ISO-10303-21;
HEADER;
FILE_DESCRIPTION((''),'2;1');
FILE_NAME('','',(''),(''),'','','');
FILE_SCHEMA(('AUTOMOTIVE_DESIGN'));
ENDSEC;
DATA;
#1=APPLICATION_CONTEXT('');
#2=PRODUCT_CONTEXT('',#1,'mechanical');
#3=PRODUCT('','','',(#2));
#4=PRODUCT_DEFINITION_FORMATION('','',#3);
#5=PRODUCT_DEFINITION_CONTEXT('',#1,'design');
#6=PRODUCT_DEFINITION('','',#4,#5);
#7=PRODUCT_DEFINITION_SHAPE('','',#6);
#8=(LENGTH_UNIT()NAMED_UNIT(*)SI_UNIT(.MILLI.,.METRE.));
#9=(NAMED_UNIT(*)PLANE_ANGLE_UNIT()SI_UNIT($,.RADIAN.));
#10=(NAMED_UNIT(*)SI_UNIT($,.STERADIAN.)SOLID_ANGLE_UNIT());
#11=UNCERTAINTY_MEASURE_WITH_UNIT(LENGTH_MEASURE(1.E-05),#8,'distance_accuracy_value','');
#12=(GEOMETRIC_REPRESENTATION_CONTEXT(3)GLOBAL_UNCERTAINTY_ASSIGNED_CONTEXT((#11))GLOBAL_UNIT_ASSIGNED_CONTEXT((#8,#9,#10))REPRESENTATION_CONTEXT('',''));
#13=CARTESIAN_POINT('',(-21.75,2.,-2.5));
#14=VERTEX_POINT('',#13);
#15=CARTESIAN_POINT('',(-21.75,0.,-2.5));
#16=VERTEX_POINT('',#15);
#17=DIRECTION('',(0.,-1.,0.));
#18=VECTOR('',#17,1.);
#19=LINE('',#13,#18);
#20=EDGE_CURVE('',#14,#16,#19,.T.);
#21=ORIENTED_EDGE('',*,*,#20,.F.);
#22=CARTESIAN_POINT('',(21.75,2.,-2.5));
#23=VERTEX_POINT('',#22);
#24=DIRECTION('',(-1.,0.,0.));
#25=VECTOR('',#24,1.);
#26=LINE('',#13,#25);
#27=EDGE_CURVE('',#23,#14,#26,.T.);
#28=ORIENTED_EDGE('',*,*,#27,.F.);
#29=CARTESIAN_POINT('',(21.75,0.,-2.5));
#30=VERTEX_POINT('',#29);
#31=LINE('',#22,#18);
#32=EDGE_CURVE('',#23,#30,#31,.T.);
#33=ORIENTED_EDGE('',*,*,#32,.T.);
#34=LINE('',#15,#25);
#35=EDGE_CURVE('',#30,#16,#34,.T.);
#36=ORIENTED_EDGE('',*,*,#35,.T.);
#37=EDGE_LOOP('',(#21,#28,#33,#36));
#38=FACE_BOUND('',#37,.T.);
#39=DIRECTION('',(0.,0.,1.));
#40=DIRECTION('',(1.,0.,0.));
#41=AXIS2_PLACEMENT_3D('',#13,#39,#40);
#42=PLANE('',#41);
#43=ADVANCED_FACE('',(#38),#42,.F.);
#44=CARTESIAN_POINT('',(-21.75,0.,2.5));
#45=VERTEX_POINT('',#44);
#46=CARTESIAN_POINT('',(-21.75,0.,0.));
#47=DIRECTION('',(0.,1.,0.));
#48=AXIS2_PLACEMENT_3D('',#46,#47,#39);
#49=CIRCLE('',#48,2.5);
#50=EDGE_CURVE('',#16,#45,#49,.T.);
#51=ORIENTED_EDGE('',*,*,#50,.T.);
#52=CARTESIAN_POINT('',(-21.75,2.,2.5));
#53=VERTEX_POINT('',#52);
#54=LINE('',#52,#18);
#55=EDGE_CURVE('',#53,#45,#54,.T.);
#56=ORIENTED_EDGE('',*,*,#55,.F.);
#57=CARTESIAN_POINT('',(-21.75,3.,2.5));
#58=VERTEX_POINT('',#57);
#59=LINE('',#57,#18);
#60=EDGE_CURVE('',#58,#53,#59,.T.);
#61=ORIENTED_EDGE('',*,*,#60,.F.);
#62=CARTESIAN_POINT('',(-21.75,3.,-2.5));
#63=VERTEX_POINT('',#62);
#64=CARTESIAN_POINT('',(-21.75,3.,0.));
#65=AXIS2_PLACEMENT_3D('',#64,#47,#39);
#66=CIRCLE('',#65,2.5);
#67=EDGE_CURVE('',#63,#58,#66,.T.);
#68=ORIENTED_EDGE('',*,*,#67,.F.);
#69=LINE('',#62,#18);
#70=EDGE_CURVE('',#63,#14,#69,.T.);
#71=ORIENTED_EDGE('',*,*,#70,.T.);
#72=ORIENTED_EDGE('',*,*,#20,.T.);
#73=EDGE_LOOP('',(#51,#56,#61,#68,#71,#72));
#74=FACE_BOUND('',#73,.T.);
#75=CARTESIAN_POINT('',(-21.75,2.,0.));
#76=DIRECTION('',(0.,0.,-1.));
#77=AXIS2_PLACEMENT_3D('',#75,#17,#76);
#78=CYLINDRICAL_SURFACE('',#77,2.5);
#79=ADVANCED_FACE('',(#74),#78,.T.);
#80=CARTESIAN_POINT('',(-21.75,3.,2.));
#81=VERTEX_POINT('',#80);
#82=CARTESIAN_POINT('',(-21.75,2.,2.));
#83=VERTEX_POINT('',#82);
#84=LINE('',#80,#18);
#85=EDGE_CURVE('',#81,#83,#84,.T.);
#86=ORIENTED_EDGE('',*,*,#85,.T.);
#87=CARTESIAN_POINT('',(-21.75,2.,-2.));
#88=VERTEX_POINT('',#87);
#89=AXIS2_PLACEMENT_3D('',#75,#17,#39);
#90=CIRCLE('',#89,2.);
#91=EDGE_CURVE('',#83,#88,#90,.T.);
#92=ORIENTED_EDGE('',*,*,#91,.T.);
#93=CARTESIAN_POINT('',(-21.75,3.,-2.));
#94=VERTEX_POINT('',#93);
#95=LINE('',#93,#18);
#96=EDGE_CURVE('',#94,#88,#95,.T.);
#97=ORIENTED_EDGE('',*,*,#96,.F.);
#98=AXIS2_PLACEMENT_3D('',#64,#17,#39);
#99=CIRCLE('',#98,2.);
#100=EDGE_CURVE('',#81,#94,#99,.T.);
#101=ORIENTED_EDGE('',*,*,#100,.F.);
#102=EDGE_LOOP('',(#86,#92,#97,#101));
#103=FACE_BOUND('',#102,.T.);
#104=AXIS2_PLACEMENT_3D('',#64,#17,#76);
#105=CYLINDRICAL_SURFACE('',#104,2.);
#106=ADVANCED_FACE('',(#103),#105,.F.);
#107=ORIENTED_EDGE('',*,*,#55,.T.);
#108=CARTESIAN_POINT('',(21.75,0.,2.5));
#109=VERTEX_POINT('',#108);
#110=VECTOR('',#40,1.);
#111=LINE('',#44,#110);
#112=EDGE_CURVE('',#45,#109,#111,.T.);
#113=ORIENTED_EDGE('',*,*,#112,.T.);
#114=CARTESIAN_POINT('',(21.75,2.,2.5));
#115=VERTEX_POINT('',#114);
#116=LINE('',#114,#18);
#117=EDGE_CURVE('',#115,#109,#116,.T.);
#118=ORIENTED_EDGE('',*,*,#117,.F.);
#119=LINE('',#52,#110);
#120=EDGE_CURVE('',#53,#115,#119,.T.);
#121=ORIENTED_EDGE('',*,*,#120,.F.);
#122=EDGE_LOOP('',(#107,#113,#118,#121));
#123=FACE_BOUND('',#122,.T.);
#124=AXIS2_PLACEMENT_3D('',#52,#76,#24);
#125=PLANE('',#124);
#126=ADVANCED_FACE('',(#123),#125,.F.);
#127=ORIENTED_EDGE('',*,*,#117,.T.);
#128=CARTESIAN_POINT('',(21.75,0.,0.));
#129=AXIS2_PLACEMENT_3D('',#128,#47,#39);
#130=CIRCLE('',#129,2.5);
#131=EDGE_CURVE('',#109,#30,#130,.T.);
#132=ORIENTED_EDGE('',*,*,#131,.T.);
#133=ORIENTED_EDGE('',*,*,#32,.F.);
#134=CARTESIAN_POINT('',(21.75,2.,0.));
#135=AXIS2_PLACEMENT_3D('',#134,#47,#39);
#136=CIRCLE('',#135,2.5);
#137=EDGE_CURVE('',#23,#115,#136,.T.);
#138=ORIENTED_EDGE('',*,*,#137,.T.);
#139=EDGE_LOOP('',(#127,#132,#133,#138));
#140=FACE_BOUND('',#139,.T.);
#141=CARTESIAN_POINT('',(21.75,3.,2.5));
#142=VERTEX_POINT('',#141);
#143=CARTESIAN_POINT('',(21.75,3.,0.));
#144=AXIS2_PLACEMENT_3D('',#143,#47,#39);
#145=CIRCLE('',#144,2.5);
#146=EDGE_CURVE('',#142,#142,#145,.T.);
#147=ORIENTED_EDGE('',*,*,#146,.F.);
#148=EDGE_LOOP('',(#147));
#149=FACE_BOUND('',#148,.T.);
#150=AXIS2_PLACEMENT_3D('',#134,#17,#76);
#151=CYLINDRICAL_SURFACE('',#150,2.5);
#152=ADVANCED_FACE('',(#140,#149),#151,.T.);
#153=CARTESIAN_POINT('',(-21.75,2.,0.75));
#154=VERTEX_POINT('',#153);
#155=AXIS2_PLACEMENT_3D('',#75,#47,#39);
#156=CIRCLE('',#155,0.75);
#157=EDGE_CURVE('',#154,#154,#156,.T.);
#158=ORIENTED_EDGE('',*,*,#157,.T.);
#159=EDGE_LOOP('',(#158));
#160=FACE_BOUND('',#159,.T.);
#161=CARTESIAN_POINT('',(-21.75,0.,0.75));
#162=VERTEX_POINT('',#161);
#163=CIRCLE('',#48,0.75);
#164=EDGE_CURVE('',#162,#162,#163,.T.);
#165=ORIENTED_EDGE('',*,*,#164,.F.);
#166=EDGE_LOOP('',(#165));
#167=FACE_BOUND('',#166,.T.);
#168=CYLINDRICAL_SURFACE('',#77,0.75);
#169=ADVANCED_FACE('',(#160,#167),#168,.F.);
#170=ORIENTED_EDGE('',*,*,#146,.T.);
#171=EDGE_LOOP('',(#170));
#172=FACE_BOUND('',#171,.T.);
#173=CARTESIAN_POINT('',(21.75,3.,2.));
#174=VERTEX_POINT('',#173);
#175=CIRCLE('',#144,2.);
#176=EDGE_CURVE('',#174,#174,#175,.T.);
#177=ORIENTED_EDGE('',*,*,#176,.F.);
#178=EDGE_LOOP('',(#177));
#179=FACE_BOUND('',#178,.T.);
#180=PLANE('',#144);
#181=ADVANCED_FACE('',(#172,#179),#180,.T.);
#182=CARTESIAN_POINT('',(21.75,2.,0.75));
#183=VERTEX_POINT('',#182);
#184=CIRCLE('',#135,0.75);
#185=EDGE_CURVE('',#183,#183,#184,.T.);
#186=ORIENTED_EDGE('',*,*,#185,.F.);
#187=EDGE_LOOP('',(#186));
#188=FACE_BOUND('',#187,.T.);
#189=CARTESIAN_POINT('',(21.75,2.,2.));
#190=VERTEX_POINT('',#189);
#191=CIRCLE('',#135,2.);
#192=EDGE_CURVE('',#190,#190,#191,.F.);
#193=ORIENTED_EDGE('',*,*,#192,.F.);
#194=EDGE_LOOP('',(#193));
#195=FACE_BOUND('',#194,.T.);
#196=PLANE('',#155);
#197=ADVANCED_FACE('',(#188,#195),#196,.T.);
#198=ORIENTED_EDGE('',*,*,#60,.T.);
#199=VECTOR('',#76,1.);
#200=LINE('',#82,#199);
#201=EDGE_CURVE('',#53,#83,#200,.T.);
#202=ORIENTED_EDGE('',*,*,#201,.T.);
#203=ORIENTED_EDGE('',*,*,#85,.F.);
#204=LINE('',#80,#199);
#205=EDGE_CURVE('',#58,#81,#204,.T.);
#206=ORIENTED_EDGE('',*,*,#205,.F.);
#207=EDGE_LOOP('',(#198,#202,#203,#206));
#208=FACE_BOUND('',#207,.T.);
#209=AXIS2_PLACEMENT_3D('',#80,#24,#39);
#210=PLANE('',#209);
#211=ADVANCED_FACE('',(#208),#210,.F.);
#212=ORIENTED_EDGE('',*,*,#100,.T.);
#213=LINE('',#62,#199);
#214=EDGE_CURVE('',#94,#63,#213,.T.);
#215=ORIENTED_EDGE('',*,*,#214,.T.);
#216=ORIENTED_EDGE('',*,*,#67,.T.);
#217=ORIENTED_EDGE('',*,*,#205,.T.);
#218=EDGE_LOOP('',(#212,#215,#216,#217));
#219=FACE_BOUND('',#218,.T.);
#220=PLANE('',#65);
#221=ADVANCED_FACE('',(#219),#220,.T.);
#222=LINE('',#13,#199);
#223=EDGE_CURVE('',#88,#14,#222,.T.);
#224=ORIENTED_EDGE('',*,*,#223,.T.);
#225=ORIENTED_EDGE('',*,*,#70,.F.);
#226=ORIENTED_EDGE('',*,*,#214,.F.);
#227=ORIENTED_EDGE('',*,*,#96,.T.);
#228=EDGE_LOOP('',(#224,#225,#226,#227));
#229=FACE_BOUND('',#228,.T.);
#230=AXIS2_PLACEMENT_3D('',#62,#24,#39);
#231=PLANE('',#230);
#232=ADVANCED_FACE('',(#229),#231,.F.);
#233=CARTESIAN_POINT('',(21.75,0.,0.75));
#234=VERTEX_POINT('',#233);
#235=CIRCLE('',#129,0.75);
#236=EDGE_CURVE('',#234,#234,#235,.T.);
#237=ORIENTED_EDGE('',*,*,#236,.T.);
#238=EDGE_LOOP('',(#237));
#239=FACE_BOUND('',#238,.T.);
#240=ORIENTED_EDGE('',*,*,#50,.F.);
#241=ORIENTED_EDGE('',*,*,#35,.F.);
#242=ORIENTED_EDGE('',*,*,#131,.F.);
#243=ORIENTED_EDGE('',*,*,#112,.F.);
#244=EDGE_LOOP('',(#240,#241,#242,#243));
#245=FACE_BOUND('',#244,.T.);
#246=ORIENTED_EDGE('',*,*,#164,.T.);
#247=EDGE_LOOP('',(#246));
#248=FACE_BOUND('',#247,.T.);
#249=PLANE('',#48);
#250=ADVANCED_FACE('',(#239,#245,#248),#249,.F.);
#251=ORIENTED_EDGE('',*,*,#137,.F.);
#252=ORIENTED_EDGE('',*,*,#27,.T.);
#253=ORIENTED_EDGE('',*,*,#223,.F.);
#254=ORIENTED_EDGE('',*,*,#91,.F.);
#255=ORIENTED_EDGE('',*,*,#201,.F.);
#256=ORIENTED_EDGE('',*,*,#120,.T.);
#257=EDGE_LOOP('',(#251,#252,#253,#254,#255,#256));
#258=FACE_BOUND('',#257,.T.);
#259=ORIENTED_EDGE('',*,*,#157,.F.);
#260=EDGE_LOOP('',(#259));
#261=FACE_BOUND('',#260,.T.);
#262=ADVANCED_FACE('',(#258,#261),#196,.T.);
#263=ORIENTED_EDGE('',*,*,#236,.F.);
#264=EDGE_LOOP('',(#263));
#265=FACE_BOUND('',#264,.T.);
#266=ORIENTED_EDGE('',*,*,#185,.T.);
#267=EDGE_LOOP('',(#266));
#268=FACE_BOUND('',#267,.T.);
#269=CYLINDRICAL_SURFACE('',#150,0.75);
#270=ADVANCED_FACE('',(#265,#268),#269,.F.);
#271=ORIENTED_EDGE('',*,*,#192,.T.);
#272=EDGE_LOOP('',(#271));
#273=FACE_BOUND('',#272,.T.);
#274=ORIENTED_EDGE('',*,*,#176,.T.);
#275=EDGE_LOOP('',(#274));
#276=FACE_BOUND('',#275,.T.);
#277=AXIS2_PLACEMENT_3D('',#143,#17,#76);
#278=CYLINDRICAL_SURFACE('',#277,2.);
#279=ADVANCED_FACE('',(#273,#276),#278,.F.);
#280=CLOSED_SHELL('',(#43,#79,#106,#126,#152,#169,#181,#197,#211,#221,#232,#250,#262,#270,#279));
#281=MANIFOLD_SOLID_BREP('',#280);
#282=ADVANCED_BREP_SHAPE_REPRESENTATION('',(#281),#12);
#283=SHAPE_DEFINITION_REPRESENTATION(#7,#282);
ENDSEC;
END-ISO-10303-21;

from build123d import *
from build123d.topology import SkipClean

# Parameters (mm, degrees)
SKETCH2_R           = 0.75
BOSS_EXTRUDE1_DEPTH = 2
SKETCH3_R           = 2.5
SKETCH3_R_2         = 2
BOSS_EXTRUDE2_DEPTH = 1


with BuildPart() as part:
    # Sketch2 → Boss-Extrude1 (new body)
    with BuildSketch(Plane(origin=(0, 0, 0), x_dir=(1, 0, 0), z_dir=(0, 1, 0))):
        with BuildLine():
            Line((-21.75, 2.5), (21.75, 2.5))
            ThreePointArc((21.75, 2.5), (24.25, 0), (21.75, -2.5))
            Line((21.75, -2.5), (-21.75, -2.5))
            ThreePointArc((-21.75, -2.5), (-24.25, 0), (-21.75, 2.5))
        make_face()
        with Locations((-21.75, 0)):
            Circle(SKETCH2_R, mode=Mode.SUBTRACT)
        with Locations((21.75, 0)):
            Circle(SKETCH2_R, mode=Mode.SUBTRACT)
    extrude(amount=BOSS_EXTRUDE1_DEPTH)

    # Sketch3 → Boss-Extrude2 (add)
    # profile 1 of 2: a face of its own
    with SkipClean():  # the faces are left unmerged after this step: merging them gives an invalid solid
        with BuildSketch(Plane(origin=(0, 2, 0), x_dir=(1, 0, 0), z_dir=(0, 1, 0))):
            with Locations((21.75, 0)):
                Circle(SKETCH3_R)
            with Locations((21.75, 0)):
                Circle(SKETCH3_R_2, mode=Mode.SUBTRACT)
        # profile 2 of 2: a face of its own
        with BuildSketch(Plane(origin=(0, 2, 0), x_dir=(1, 0, 0), z_dir=(0, 1, 0))):
            with BuildLine():
                Line((-21.75, 2.5), (-21.75, 2))
                ThreePointArc((-21.75, 2), (-23.75, 0), (-21.75, -2))
                Line((-21.75, -2), (-21.75, -2.5))
                ThreePointArc((-21.75, -2.5), (-24.25, 0), (-21.75, 2.5))
            make_face()
        extrude(amount=BOSS_EXTRUDE2_DEPTH)
    add(part.part.scale(1), mode=Mode.REPLACE)  # the faces are merged on a copy


solid = part.part
